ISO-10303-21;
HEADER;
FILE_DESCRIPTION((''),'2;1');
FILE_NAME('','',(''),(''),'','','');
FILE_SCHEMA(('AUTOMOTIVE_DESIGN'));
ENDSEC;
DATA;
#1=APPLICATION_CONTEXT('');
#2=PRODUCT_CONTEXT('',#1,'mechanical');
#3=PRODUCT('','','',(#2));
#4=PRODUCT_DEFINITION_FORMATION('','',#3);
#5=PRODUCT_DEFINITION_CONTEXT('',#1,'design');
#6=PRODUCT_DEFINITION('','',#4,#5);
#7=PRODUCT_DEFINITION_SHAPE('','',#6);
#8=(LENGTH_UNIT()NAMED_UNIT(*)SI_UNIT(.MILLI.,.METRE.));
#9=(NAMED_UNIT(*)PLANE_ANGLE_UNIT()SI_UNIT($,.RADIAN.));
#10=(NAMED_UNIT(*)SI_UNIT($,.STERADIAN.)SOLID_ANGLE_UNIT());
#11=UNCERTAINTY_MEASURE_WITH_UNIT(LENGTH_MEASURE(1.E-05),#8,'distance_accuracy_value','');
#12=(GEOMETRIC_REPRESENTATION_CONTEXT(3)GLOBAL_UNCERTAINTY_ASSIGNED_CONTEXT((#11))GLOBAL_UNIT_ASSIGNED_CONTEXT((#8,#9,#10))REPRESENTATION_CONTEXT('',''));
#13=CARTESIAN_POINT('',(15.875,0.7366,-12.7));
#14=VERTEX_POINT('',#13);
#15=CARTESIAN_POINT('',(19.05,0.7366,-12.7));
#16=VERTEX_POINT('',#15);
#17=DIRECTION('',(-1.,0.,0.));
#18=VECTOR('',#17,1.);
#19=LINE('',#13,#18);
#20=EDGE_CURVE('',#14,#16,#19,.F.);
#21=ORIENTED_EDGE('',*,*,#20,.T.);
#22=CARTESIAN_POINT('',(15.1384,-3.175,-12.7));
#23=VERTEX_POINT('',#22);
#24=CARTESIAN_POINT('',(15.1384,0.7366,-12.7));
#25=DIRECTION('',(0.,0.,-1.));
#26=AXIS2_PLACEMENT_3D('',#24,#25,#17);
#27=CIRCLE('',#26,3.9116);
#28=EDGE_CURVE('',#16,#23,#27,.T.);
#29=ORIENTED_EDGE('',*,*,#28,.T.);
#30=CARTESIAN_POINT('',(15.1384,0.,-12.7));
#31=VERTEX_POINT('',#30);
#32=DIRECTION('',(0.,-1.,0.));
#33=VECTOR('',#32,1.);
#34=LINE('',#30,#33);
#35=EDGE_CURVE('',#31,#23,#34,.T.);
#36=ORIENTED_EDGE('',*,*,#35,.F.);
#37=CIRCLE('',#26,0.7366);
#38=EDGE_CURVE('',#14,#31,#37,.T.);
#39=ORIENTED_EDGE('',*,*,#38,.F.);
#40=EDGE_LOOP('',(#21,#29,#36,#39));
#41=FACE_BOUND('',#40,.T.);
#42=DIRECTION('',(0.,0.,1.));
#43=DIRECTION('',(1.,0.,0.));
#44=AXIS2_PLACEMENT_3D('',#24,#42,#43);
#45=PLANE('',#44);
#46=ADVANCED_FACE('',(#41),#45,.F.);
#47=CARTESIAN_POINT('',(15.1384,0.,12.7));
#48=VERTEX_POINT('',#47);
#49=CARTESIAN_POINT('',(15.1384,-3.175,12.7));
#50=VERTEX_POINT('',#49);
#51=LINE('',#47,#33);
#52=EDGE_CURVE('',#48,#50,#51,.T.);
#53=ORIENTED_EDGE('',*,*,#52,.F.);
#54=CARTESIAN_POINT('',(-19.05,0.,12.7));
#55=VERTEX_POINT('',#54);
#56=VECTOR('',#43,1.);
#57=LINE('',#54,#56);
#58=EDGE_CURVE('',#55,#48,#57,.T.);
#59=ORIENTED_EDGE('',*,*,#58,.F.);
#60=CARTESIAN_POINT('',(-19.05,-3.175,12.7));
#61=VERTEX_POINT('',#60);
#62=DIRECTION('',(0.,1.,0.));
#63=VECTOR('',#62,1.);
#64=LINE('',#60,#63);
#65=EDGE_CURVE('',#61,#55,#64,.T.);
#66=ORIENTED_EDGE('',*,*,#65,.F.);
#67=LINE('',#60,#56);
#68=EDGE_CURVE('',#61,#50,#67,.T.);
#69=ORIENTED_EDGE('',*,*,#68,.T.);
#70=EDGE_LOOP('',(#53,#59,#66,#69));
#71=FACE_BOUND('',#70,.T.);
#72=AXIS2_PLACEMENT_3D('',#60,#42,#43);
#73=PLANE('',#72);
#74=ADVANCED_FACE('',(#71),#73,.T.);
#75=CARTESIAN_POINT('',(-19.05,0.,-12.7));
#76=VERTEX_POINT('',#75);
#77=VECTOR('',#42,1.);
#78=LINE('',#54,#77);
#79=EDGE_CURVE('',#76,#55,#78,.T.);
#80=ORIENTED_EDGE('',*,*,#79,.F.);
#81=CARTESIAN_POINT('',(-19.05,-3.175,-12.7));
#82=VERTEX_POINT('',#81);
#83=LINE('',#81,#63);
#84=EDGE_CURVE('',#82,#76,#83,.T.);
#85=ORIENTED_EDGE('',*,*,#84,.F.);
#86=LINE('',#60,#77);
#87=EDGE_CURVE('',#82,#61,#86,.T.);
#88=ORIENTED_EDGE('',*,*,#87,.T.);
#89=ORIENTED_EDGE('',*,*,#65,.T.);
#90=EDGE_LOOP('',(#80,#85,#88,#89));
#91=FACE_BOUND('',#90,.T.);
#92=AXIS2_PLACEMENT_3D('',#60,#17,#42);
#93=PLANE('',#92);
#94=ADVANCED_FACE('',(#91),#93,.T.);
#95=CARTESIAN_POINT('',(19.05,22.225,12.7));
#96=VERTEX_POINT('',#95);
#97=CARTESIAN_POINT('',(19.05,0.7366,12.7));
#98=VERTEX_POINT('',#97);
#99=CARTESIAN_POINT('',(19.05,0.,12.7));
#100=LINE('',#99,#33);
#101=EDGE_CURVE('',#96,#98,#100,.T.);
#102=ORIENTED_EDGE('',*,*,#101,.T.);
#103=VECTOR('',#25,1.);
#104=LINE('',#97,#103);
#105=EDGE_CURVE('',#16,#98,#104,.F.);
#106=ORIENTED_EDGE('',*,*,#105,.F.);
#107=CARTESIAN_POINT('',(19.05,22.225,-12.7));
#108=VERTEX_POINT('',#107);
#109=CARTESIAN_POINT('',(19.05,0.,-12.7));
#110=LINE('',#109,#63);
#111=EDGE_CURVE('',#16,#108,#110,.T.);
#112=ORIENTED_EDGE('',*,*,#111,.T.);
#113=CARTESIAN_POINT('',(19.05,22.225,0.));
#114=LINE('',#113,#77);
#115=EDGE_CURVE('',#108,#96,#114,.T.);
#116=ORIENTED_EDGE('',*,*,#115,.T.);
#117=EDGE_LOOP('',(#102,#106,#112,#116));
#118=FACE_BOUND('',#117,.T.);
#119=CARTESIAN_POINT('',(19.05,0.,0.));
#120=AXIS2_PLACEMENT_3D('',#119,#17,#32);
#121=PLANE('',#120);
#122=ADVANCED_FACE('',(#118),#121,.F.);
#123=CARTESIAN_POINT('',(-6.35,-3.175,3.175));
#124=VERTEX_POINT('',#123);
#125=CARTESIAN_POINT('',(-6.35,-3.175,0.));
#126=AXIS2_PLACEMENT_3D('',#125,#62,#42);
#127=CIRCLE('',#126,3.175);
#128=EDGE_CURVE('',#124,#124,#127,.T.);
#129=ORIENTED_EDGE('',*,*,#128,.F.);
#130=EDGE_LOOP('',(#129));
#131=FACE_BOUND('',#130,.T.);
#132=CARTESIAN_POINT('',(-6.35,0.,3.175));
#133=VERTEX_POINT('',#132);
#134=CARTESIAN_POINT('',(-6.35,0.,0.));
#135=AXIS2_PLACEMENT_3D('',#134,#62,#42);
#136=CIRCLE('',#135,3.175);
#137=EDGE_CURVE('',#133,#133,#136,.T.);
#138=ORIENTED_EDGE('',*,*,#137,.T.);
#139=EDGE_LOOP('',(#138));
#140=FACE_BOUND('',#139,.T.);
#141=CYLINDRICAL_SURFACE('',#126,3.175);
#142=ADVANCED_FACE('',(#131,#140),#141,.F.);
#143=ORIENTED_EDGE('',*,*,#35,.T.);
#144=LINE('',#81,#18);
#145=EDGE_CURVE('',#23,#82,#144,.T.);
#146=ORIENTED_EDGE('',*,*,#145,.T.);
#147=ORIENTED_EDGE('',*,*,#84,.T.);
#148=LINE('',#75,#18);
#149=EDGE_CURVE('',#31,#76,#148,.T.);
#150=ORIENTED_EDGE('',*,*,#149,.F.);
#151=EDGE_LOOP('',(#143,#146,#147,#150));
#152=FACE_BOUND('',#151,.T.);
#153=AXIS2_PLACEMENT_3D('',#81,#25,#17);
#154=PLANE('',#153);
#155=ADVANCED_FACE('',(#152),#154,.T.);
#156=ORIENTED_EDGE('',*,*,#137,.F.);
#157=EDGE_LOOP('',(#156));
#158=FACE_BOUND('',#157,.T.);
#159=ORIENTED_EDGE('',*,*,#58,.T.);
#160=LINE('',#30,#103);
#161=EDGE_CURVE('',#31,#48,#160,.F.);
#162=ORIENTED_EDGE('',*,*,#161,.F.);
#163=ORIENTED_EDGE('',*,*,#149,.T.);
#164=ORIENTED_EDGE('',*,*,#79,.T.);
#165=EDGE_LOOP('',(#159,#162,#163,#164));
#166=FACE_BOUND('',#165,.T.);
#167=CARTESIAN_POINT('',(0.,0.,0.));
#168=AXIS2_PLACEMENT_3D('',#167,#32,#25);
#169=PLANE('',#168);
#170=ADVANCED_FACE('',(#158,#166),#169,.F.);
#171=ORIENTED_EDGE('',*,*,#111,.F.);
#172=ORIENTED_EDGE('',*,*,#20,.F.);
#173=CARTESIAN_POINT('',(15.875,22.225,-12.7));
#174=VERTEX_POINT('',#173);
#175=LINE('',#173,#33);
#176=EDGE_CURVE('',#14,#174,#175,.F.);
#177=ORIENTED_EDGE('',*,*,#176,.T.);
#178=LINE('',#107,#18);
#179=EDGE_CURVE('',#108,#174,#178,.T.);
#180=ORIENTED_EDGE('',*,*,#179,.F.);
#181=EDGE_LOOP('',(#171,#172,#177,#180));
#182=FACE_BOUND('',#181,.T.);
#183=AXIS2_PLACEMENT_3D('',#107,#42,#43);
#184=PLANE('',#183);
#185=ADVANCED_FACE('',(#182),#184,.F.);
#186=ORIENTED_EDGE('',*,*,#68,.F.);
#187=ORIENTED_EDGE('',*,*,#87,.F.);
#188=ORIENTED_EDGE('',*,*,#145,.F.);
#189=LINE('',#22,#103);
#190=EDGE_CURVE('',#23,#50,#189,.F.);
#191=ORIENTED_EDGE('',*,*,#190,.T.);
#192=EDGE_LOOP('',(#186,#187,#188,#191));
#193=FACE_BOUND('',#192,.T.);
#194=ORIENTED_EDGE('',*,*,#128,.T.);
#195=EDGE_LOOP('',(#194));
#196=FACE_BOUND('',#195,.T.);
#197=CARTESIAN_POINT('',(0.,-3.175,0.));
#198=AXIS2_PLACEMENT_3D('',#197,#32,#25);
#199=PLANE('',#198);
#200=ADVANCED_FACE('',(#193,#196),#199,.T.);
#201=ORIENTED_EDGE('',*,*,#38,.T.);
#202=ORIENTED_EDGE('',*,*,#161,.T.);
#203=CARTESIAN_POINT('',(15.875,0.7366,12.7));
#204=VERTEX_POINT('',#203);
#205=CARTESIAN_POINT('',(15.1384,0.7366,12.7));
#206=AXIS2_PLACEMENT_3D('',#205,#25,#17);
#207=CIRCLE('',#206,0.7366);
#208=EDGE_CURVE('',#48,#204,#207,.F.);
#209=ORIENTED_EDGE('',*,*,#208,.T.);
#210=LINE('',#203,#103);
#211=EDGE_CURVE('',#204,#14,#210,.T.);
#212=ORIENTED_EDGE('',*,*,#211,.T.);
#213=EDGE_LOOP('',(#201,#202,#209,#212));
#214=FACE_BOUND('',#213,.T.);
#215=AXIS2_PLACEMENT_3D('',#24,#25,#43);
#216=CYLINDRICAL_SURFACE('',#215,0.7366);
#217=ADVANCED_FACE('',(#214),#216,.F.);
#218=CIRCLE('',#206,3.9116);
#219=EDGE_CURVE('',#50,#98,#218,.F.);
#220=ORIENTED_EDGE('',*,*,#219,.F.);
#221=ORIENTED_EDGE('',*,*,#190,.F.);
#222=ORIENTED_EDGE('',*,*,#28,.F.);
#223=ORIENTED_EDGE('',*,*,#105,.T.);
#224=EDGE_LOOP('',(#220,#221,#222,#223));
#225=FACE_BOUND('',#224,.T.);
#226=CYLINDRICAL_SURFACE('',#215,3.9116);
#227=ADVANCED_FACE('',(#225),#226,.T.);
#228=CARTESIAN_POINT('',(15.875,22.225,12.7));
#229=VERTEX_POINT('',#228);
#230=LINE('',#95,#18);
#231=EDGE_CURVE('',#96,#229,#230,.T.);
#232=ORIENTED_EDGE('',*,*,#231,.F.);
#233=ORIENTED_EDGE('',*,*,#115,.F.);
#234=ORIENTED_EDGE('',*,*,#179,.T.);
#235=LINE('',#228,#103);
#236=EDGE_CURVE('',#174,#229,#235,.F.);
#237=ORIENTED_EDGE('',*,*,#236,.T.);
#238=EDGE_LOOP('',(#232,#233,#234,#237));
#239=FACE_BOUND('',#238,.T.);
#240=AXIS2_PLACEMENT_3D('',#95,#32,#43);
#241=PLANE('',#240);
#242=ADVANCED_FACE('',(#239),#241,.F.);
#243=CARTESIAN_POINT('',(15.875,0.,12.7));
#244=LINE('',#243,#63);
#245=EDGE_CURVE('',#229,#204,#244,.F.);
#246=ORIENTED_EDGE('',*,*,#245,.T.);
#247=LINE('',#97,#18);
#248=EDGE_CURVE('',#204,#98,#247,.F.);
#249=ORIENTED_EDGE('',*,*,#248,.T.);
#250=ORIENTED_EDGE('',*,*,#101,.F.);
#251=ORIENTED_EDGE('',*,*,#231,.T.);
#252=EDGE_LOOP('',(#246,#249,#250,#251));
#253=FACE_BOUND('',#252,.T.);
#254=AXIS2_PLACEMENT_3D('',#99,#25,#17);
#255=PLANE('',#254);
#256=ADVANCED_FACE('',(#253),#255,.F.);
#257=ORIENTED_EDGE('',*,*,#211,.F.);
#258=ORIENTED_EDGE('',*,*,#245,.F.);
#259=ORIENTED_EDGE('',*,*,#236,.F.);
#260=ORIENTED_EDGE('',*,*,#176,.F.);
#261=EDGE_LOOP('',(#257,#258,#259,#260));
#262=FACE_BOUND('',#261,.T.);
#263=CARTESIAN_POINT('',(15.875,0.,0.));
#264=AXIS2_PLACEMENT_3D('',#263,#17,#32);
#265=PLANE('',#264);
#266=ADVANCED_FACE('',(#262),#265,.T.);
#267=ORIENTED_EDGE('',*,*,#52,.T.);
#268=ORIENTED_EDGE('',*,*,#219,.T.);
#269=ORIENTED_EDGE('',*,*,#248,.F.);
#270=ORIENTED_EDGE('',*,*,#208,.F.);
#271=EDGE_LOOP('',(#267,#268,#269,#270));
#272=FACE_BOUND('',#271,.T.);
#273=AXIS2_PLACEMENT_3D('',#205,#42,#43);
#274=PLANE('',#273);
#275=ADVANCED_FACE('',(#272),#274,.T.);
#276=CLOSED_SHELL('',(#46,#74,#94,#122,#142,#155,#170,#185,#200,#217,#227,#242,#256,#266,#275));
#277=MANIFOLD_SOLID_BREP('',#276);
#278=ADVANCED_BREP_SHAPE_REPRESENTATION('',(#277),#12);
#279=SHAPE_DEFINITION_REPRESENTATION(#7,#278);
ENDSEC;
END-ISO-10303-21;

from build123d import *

# Parameters (mm, degrees)
SKETCH1_W                    = 38.1
SKETCH1_H                    = 25.4
BASE_FLANGE1_DEPTH           = 3.175
EDGE_FLANGE1_STRIP_W         = 14.1732
EDGE_FLANGE1_STRIP_H         = 3.175
EDGE_FLANGE1_STRIP_CUT_DEPTH = 25.4
EDGE_FLANGE1_DEPTH           = 25.4
SKETCH10_R                   = 3.175
CUT_EXTRUDE1_DEPTH           = 32.908355097


# Sheet-metal steps are written as plain solids
with BuildPart() as part:
    # Sketch1 → Base-Flange1 (new body)
    with BuildSketch(Plane(origin=(0, 0, 0), x_dir=(1, 0, 0), z_dir=(0, 1, 0))):
        Rectangle(SKETCH1_W, SKETCH1_H)
    extrude(amount=-BASE_FLANGE1_DEPTH)

    # Edge-Flange1 strip (across the edge) → Edge-Flange1 strip cut (cut)
    with BuildSketch(Plane(origin=(19.05, 0, 12.7), x_dir=(-1, 0, 0), z_dir=(0, 0, -1))):
        with Locations((-3.175, -1.5875)):
            Rectangle(EDGE_FLANGE1_STRIP_W, EDGE_FLANGE1_STRIP_H)
    extrude(amount=EDGE_FLANGE1_STRIP_CUT_DEPTH, mode=Mode.SUBTRACT)

    # Edge-Flange1 section (across the edge) → Edge-Flange1 (add)
    with BuildSketch(Plane(origin=(19.05, 0, 12.7), x_dir=(-1, 0, 0), z_dir=(0, 0, -1))):
        with BuildLine():
            Line((0, 0.7366), (0, 22.225))
            Line((0, 22.225), (3.175, 22.225))
            Line((3.175, 22.225), (3.175, 0.7366))
            ThreePointArc((3.175, 0.7366), (3.390745145, 0.215745145), (3.9116, 0))
            Line((3.9116, 0), (3.9116, -3.175))
            ThreePointArc((3.9116, -3.175), (1.145681115, -2.029318885), (0, 0.7366))
        make_face()
    extrude(amount=EDGE_FLANGE1_DEPTH)

    # Sketch10 → Cut-Extrude1 (cut, through all)
    with BuildSketch(Plane(origin=(0, 0, 0), x_dir=(1, 0, 0), z_dir=(0, 1, 0))):
        with Locations(Location((-6.35, 0, 0), (0, 0, 270))):
            Circle(SKETCH10_R)
    extrude(amount=-CUT_EXTRUDE1_DEPTH, mode=Mode.SUBTRACT)


solid = part.part
